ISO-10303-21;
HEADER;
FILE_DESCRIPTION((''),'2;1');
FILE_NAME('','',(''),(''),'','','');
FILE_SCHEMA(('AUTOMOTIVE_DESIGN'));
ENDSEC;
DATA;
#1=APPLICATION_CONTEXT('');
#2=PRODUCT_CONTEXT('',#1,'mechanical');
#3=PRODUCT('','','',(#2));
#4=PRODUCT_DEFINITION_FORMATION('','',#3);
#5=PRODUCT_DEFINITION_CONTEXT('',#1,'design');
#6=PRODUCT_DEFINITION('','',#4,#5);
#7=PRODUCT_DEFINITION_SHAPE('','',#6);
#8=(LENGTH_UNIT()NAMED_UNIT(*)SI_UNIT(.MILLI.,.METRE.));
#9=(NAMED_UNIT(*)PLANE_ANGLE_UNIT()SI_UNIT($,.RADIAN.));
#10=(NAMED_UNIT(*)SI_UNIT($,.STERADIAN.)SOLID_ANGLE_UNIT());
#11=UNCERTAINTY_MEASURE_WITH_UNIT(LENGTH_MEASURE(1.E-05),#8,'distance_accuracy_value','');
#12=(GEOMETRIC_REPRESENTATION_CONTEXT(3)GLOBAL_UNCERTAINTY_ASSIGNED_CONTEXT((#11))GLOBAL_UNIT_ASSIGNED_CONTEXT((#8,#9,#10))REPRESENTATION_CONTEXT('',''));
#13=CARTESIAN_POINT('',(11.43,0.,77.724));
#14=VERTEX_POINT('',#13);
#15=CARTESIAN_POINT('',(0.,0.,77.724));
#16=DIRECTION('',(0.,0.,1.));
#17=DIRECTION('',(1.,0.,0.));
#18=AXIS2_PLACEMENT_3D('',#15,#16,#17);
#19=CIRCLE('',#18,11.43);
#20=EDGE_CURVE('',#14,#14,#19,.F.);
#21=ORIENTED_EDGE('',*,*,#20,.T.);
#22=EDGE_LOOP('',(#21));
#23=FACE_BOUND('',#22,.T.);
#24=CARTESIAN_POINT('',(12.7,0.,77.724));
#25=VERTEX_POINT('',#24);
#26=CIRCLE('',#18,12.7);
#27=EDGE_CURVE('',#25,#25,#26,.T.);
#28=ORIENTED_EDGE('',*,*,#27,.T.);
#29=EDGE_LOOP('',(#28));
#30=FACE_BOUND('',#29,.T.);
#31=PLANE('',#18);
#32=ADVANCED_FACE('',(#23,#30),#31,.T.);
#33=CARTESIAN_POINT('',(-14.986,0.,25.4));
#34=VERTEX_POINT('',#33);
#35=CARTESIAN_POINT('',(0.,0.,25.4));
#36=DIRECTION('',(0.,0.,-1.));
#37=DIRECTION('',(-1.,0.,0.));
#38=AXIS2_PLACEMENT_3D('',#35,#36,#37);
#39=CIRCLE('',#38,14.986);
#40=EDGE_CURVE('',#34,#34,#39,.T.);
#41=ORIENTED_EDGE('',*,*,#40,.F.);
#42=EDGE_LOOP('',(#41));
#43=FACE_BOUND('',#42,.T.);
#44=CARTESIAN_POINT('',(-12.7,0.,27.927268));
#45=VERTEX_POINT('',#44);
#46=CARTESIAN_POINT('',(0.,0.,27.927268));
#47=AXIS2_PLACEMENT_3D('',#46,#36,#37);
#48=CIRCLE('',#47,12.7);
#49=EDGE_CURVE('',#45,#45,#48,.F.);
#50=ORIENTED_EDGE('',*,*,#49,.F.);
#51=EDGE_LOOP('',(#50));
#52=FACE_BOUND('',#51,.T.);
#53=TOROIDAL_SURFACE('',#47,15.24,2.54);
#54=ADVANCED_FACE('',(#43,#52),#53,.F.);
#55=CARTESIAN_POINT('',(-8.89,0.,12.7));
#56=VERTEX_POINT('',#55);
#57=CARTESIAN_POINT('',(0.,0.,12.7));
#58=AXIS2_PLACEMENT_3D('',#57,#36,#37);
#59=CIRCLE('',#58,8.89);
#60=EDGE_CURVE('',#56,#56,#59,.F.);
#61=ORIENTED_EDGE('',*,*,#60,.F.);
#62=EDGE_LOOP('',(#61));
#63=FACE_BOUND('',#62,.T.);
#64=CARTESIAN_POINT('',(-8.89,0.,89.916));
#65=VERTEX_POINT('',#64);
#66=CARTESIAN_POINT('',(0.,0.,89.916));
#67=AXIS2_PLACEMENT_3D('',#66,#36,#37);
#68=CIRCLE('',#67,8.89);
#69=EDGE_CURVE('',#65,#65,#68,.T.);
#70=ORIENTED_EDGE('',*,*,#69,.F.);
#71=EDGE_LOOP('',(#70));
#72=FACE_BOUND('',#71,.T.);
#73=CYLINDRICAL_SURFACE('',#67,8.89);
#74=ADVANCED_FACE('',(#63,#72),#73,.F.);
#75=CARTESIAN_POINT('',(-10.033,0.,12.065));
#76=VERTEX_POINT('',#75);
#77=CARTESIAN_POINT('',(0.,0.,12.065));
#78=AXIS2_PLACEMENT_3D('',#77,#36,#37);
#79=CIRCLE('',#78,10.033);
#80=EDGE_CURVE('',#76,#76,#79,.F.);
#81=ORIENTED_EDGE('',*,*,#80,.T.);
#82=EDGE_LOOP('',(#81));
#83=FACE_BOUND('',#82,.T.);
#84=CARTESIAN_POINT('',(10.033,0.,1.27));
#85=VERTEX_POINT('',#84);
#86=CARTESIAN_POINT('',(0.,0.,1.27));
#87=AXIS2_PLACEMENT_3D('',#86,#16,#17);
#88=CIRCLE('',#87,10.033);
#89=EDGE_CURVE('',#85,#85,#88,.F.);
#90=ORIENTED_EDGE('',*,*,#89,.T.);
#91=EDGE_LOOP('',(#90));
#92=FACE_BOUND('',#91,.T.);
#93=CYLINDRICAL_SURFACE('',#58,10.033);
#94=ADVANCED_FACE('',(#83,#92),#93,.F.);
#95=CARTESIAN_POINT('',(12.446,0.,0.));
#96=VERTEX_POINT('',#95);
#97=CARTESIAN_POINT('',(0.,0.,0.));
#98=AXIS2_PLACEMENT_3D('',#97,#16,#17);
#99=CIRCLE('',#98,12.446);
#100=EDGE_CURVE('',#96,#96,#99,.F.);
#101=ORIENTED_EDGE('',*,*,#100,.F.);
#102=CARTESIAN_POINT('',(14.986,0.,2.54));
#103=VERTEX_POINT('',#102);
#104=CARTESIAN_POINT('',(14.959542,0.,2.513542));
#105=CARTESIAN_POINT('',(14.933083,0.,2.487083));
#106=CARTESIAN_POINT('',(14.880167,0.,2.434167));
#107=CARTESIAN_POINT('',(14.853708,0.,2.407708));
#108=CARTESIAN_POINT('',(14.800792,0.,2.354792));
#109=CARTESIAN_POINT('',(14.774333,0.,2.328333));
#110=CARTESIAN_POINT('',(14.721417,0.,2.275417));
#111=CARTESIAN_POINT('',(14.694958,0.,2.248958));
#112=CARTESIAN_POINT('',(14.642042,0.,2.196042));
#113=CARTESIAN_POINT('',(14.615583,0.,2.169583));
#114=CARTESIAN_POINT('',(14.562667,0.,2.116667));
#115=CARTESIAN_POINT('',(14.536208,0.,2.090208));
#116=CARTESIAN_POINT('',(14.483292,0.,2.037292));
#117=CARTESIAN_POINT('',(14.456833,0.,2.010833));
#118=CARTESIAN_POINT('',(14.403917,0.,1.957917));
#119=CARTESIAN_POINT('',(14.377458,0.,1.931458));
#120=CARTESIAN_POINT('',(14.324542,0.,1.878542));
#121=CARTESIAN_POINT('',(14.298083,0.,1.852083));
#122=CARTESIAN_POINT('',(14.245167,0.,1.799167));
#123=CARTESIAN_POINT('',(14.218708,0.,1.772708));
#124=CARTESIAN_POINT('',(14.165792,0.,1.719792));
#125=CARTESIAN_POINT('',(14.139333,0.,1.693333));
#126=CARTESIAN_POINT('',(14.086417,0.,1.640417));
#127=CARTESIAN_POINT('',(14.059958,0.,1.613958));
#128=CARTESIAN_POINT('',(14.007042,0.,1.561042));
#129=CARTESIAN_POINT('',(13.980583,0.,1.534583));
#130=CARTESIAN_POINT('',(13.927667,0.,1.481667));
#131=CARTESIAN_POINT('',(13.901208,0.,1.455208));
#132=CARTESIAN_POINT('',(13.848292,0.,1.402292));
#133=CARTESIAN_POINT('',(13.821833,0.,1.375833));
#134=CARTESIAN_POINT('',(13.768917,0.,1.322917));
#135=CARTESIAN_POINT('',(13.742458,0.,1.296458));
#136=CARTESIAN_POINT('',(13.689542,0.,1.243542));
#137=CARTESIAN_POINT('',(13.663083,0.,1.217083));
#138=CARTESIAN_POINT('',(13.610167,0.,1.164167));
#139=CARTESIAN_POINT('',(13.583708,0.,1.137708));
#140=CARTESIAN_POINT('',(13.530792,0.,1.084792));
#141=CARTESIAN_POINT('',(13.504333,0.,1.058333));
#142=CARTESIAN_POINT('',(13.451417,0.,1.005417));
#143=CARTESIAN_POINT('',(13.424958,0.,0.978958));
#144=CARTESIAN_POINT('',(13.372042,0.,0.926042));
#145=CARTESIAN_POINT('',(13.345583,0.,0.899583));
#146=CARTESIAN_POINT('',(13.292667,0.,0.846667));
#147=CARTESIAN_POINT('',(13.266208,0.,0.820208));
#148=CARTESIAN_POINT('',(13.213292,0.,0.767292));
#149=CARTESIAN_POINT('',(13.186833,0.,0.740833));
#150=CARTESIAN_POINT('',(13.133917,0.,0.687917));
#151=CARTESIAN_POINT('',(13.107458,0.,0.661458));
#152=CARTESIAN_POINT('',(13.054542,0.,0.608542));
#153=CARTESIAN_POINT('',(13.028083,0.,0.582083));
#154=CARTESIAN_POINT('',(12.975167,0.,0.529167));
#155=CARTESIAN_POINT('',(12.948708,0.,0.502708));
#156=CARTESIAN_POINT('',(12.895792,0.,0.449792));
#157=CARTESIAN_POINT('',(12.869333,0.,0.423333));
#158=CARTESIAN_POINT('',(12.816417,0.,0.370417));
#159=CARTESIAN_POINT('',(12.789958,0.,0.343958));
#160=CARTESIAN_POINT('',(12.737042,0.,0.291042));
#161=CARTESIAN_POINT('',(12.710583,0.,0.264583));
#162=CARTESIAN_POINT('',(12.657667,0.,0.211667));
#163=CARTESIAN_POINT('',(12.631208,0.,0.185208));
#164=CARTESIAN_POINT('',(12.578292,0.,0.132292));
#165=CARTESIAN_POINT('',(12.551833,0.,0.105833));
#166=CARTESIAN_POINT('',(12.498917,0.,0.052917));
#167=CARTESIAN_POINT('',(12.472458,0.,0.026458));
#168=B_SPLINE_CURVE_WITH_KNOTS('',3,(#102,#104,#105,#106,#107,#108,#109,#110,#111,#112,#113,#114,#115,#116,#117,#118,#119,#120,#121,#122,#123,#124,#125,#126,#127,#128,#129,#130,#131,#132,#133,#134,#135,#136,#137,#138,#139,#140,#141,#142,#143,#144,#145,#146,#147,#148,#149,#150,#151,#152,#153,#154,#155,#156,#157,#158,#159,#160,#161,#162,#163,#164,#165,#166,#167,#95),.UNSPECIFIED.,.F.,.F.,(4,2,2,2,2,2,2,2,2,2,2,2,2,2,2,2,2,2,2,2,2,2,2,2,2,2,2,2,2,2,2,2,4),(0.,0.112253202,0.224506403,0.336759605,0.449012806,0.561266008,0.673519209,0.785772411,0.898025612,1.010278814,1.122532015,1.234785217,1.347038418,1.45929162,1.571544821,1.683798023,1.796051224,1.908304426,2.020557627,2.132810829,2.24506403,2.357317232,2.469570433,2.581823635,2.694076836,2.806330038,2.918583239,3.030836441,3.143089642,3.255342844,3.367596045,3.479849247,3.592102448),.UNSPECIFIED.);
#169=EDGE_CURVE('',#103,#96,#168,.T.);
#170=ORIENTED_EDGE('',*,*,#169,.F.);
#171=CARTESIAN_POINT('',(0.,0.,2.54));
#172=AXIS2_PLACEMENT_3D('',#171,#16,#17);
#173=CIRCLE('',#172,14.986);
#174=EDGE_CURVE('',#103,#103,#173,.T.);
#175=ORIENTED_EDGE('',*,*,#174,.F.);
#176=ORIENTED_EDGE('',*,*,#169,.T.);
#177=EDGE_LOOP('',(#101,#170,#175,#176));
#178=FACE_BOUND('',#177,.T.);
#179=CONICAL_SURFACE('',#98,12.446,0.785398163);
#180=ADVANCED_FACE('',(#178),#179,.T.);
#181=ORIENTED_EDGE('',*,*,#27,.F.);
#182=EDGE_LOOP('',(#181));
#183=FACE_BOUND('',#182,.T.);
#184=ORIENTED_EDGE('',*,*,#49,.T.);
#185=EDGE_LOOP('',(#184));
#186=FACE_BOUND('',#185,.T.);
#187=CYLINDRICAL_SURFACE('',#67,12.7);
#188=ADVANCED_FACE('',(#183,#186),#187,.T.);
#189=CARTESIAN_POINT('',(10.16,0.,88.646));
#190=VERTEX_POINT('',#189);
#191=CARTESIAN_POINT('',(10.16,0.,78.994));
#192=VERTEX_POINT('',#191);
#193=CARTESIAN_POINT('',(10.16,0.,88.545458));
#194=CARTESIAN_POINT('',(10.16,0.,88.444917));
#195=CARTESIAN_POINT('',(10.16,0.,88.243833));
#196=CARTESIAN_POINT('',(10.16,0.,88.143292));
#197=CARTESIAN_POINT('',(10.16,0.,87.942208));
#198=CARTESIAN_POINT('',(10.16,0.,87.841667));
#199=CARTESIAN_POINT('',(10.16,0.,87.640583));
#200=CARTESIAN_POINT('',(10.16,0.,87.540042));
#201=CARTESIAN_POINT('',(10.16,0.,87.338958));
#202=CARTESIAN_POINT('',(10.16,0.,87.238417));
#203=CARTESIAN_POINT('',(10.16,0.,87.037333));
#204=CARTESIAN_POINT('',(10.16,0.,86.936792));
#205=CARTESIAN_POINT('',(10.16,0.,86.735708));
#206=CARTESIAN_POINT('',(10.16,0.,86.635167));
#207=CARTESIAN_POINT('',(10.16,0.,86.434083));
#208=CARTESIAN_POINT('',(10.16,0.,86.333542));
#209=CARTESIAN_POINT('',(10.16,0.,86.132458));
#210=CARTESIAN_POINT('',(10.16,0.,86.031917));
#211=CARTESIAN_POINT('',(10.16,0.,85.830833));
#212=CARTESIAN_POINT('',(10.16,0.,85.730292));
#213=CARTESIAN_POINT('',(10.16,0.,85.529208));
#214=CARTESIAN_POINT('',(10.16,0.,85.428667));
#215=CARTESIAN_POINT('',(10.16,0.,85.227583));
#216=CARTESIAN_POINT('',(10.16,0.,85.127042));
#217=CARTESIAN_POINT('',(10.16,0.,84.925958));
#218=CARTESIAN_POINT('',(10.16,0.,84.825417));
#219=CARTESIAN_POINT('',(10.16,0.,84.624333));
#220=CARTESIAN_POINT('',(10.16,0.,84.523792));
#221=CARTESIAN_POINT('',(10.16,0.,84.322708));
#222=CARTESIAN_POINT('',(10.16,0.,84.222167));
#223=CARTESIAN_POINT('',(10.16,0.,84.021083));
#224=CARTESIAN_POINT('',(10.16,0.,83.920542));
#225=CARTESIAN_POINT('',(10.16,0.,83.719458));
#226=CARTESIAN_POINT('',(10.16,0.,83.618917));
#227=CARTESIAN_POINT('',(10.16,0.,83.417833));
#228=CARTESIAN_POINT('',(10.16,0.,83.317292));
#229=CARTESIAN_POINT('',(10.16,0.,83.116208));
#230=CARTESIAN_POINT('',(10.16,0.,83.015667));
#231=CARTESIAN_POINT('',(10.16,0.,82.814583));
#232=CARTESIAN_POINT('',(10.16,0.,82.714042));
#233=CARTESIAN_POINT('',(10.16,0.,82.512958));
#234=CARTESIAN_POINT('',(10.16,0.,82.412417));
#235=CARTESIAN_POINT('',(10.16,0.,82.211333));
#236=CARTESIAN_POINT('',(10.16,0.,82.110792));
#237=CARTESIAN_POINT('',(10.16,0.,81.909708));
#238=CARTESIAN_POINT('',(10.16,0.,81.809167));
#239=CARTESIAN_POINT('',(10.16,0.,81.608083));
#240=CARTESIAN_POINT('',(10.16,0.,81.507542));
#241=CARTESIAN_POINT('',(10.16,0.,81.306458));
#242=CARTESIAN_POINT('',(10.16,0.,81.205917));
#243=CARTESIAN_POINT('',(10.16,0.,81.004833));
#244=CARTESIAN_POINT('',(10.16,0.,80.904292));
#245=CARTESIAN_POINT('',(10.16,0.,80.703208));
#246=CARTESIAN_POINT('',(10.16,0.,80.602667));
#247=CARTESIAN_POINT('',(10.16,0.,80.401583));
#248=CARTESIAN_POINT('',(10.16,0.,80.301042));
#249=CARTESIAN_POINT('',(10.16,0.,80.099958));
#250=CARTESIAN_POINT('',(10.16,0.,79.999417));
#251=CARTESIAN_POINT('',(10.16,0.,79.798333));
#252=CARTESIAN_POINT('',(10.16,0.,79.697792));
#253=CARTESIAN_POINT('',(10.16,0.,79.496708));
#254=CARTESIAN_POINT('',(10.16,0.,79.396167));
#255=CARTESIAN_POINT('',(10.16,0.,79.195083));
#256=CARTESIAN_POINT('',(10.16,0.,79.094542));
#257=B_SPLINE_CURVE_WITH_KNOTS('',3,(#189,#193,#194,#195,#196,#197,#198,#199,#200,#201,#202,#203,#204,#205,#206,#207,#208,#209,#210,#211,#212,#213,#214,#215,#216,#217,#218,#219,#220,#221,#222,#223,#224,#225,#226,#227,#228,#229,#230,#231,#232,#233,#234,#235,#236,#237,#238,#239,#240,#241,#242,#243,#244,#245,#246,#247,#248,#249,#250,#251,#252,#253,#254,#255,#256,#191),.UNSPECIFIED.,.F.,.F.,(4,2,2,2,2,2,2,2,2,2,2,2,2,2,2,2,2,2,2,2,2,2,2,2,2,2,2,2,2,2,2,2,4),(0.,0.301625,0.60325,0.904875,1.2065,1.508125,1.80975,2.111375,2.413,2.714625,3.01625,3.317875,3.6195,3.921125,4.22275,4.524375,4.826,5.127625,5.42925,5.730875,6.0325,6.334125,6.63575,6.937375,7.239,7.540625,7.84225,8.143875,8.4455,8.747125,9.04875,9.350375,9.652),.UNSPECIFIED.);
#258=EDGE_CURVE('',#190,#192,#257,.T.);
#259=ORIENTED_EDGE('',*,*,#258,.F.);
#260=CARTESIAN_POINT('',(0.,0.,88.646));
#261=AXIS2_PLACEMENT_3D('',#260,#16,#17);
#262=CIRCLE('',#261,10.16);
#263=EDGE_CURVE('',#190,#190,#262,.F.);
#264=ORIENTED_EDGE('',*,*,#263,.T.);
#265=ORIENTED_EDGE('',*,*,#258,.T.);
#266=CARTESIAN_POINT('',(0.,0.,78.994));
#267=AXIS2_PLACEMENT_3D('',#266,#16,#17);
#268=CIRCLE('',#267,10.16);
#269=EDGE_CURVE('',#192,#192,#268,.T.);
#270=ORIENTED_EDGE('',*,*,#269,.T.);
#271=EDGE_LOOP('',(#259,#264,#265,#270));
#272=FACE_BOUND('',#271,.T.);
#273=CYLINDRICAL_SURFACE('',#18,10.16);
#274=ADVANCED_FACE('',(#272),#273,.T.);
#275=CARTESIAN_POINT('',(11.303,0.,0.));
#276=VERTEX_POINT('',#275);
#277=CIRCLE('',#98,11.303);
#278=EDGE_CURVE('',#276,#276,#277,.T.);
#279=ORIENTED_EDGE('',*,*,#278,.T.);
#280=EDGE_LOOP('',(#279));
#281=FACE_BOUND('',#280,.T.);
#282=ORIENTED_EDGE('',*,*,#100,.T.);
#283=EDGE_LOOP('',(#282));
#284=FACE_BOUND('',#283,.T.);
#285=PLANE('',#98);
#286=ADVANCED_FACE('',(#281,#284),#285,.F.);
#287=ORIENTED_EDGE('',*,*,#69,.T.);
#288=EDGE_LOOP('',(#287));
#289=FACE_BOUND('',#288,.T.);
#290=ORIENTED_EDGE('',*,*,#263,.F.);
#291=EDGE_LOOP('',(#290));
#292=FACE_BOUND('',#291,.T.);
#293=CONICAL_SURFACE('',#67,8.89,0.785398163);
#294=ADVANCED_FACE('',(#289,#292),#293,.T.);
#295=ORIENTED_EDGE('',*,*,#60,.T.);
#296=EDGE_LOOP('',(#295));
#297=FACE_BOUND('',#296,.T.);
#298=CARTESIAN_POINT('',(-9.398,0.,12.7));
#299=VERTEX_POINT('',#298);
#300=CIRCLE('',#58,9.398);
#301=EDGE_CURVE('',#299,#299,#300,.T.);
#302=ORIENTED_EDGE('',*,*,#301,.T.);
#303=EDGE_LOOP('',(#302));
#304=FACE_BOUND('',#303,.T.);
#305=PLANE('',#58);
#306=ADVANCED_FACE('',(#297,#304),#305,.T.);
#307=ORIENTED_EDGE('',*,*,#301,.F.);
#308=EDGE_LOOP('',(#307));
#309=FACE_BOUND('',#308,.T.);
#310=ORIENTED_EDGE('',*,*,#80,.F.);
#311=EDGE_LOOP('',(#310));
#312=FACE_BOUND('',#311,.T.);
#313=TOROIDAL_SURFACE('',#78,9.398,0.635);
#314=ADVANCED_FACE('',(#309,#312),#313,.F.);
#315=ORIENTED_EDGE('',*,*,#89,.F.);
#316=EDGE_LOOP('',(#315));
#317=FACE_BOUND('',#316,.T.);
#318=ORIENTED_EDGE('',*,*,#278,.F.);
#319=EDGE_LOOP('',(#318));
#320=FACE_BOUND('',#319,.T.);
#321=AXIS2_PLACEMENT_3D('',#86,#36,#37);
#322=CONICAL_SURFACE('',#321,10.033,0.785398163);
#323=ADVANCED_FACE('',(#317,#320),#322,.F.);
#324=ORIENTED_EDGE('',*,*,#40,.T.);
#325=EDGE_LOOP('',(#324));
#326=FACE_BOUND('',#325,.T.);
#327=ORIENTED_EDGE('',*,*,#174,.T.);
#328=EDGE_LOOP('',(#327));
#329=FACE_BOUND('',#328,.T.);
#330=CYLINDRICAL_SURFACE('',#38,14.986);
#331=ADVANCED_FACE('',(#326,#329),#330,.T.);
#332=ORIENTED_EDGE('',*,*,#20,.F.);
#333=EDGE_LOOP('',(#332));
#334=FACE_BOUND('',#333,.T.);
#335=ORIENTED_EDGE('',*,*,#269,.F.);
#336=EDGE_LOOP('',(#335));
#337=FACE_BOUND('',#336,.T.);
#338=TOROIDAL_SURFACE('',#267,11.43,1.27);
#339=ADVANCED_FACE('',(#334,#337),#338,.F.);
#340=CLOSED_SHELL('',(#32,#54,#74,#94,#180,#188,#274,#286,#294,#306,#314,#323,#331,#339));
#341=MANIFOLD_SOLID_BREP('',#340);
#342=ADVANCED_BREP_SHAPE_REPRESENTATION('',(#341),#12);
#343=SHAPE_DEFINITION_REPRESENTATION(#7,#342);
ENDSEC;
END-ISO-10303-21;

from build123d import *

# Parameters (mm, degrees)
SKETCH1_R           = 12.7
BOSS_EXTRUDE1_DEPTH = 89.916
SKETCH2_R           = 8.89
CUT_EXTRUDE1_DEPTH  = 92.69224098
SKETCH3_R           = 10.033
CUT_EXTRUDE2_DEPTH  = 12.7
CUT_EXTRUDE3_START  = -12.192
SKETCH4_R           = 12.7
SKETCH4_R_2         = 10.16
CUT_EXTRUDE3_DEPTH  = 12.192
FILLET1_R           = 1.27
CHAMFER1_SIZE       = 1.27
FILLET2_R           = 0.635
CHAMFER2_SIZE       = 1.27
SKETCH5_R           = 14.986
SKETCH5_R_2         = 12.7
BOSS_EXTRUDE2_DEPTH = 25.4
FILLET3_R           = 2.54
CHAMFER3_SIZE       = 2.54


# Some blends are built 0.0001 mm under size
with BuildPart() as part:
    # Sketch1 → Boss-Extrude1 (new body)
    with BuildSketch(Plane.XY):
        Circle(SKETCH1_R)
    extrude(amount=BOSS_EXTRUDE1_DEPTH)

    # Sketch2 → Cut-Extrude1 (cut, through all)
    with BuildSketch(Plane(origin=(0, 0, 0), x_dir=(-1, 0, 0), z_dir=(0, 0, -1))):
        Circle(SKETCH2_R)
    extrude(amount=-CUT_EXTRUDE1_DEPTH, mode=Mode.SUBTRACT)

    # Sketch3 → Cut-Extrude2 (cut)
    with BuildSketch(Plane(origin=(0, 0, 0), x_dir=(-1, 0, 0), z_dir=(0, 0, -1))):
        Circle(SKETCH3_R)
    extrude(amount=-CUT_EXTRUDE2_DEPTH, mode=Mode.SUBTRACT)

    # Sketch4 → Cut-Extrude3 (cut)
    with BuildSketch(Plane.XY.offset(89.916).offset(CUT_EXTRUDE3_START)):
        Circle(SKETCH4_R)
        Circle(SKETCH4_R_2, mode=Mode.SUBTRACT)
    extrude(amount=CUT_EXTRUDE3_DEPTH, mode=Mode.SUBTRACT)

    # Fillet1
    fillet1_edges = [part.edges().sort_by_distance(p)[0] for p in [
        (-10.16, 0, 77.724),
    ]]
    fillet(fillet1_edges, radius=FILLET1_R)

    # Chamfer1
    chamfer1_edges = [part.edges().sort_by_distance(p)[0] for p in [
        (10.033, 0, 0),
    ]]
    chamfer(chamfer1_edges, length=CHAMFER1_SIZE)

    # Fillet2
    fillet2_edges = [part.edges().sort_by_distance(p)[0] for p in [
        (10.033, 0, 12.7),
    ]]
    fillet(fillet2_edges, radius=FILLET2_R)

    # Chamfer2
    chamfer2_edges = [part.edges().sort_by_distance(p)[0] for p in [
        (-10.16, 0, 89.916),
    ]]
    chamfer(chamfer2_edges, length=CHAMFER2_SIZE - 0.0001)  # a hair under: the kernel refuses the full size

    # Sketch5 → Boss-Extrude2 (add)
    with BuildSketch(Plane(origin=(0, 0, 0), x_dir=(-1, 0, 0), z_dir=(0, 0, -1))):
        Circle(SKETCH5_R)
        Circle(SKETCH5_R_2, mode=Mode.SUBTRACT)
    extrude(amount=-BOSS_EXTRUDE2_DEPTH)

    # Fillet3
    # the kernel refuses this fillet: 2.54 mm, written as the material it adds along each edge
    with BuildSketch(Plane(origin=(0, 0, 25.4), x_dir=(1, 0, 0), z_dir=(0, -1, 0))) as fillet3_piece_1:
        with BuildLine():
            CenterArc((15.24, 2.52726809), FILLET3_R, 180, 84.260829523)
            Line((12.7, 2.52726809), (12.6492, 2.52726809))
            Line((12.6492, 2.52726809), (12.6492, 0))
            Line((12.6492, 0), (12.7, -0.0508))
            ThreePointArc((12.7, -0.0508), (13.843, -0.0508), (14.98092, -0.050545362))
            Line((14.98092, -0.050545362), (14.986, 0))
        make_face()
    revolve(axis=Axis((0, 0, 25.4), (0, 0, 1)))

    # Chamfer3
    chamfer3_edges = [part.edges().sort_by_distance(p)[0] for p in [
        (14.986, 0, 0),
    ]]
    chamfer(chamfer3_edges, length=CHAMFER3_SIZE)


solid = part.part
